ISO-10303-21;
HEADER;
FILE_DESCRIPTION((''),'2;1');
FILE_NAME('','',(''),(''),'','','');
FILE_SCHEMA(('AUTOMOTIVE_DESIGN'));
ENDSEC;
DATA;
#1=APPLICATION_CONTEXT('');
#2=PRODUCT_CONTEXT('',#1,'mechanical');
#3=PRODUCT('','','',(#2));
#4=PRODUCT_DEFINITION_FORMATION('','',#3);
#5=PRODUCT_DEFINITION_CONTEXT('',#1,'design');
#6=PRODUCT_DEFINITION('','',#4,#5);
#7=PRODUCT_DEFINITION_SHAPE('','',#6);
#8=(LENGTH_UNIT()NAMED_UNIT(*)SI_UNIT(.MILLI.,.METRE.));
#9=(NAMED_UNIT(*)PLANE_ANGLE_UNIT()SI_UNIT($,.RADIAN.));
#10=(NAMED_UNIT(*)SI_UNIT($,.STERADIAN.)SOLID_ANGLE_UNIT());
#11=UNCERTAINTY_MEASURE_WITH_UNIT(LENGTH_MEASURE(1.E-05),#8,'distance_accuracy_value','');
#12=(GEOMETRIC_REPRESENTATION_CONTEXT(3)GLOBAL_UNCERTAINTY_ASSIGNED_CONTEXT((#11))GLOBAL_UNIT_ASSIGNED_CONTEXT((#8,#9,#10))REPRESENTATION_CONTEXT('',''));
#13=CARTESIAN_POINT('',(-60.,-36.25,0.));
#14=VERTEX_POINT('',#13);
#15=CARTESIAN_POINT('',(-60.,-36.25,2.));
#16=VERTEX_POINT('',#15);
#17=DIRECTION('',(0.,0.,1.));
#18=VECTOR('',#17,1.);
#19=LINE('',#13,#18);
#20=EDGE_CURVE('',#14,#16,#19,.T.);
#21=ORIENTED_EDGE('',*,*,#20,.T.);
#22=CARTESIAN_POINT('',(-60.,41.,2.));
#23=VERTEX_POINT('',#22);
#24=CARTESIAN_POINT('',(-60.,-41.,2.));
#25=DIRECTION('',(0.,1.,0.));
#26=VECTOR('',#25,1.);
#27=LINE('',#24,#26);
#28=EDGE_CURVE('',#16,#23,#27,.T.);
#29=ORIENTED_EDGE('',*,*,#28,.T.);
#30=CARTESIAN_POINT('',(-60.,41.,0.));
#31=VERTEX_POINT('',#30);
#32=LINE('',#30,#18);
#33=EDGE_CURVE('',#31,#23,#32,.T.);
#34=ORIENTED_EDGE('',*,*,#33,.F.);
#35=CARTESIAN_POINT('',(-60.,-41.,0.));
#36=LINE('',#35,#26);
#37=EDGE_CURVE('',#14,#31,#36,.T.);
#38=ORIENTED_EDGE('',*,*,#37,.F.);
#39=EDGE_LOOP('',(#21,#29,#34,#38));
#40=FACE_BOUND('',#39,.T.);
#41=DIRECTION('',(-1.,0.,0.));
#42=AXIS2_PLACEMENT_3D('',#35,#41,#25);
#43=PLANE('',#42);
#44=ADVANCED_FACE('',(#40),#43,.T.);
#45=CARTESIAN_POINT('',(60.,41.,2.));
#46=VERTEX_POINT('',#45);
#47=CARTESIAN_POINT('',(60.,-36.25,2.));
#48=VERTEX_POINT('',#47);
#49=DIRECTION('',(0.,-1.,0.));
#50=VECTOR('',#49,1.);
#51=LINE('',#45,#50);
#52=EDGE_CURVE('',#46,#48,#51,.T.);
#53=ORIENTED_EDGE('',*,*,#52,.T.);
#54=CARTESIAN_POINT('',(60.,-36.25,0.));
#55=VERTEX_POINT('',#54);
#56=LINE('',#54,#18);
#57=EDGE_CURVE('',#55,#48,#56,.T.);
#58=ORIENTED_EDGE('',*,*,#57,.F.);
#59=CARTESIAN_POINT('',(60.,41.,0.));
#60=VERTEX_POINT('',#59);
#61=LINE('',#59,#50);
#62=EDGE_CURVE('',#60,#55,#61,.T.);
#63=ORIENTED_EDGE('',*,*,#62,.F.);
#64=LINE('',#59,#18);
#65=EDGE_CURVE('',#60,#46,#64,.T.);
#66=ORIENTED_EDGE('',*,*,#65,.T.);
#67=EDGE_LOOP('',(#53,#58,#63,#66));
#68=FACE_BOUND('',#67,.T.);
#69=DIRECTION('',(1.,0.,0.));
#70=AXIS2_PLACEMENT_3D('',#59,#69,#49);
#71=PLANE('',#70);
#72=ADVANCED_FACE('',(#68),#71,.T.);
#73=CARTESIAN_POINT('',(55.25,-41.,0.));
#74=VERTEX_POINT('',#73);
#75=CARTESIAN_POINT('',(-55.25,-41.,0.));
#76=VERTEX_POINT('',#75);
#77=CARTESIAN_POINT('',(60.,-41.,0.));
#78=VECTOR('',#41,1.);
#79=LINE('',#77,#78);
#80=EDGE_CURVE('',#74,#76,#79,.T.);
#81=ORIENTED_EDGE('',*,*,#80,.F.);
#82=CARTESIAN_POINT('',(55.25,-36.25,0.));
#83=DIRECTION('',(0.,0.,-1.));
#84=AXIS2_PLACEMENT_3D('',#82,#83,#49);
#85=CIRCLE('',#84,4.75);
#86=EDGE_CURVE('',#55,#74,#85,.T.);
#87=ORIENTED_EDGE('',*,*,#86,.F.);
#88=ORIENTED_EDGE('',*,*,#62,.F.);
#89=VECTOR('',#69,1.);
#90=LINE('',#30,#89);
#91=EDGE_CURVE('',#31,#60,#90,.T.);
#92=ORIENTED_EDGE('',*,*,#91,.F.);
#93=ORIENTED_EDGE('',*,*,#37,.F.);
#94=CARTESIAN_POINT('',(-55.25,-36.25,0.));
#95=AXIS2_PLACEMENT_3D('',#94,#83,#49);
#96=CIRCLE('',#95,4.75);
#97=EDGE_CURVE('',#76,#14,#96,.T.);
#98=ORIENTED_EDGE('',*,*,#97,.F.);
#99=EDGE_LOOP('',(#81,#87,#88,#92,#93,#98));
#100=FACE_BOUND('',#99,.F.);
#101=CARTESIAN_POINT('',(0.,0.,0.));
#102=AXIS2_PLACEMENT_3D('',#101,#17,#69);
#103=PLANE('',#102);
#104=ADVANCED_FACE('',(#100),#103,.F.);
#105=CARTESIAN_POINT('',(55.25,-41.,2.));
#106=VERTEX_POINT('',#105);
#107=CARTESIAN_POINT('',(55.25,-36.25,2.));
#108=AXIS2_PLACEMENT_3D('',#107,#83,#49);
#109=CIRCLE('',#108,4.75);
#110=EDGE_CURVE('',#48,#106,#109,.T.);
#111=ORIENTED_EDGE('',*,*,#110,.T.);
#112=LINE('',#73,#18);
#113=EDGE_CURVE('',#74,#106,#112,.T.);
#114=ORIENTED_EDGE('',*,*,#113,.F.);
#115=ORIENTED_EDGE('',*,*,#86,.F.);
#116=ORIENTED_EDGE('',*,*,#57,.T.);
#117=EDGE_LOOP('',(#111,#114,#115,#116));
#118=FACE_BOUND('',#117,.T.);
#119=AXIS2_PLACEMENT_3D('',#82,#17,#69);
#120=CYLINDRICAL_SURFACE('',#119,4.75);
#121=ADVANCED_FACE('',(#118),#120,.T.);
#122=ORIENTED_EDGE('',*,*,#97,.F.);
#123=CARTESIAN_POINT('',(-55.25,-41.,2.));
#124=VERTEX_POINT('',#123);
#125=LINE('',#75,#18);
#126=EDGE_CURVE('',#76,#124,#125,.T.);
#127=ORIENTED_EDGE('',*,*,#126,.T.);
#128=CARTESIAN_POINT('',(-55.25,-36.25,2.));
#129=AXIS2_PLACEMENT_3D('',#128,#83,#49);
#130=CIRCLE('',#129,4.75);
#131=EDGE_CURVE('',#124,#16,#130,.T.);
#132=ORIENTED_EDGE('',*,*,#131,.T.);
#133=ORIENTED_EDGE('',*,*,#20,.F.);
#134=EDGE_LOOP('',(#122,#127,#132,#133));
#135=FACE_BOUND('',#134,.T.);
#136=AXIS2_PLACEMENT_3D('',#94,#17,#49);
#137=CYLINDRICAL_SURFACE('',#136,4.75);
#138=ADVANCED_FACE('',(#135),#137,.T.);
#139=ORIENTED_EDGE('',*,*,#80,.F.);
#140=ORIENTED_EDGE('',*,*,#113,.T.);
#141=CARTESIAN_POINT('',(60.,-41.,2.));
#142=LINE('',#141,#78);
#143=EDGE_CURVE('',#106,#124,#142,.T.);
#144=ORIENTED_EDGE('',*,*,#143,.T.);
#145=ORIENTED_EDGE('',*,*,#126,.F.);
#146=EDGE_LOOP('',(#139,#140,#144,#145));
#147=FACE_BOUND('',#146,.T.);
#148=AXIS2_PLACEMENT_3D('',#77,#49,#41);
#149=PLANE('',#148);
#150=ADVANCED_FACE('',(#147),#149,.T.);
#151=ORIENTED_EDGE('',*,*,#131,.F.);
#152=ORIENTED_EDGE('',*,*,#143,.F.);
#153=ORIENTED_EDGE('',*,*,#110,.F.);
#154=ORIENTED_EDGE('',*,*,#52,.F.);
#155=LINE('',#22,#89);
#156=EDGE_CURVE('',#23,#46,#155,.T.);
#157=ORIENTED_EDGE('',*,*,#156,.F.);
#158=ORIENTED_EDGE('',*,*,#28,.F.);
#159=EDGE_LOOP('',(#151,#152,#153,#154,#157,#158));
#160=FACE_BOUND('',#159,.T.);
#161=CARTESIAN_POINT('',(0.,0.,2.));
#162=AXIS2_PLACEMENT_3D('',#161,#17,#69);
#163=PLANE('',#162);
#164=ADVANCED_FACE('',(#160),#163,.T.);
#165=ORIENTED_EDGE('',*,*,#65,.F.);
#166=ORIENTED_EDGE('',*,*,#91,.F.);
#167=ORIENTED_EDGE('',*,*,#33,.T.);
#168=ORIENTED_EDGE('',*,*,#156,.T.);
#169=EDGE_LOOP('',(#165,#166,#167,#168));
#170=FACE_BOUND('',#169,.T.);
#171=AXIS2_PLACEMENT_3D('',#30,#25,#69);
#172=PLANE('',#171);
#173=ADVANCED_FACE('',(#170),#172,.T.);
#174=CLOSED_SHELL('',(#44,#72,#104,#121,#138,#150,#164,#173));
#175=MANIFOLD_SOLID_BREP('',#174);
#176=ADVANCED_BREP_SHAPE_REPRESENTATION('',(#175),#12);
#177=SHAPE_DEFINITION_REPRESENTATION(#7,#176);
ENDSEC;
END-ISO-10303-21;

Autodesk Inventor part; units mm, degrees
ref_plane "YZ Plane" through (0, 0, 0) normal (1, 0, 0) x (0, 1, 0)
ref_plane "XZ Plane" through (0, 0, 0) normal (0, 1, 0) x (-1, 0, 0)
ref_plane "XY Plane" through (0, 0, 0) normal (0, 0, 1) x (1, 0, 0)
sketch "Sketch1" plane through (0, 0, 0) normal (0, 0, 1) x (1, 0, 0)
  line L0 (-60, 41) -> (60, 41)
  line L1 (60, 41) -> (60, -41)
  line L2 (60, -41) -> (-60, -41)
  line L3 (-60, -41) -> (-60, 41)
  line L4 (-60, 41) -> (60, -41) construction
  point P0 (0, 0)
  point P1 (0, 0)
  dimension "d0" = 120
  dimension "d1" = 82
extrude "Plate1" add sketch "Sketch1" along normal blind 2
fillet "Corner Round2" radius 4.75 2 edges at (60, -41, 1) (-60, -41, 1)
equation "\"d2\" = Thickness"
equation "\"BendReliefWidth\" = Thickness"
equation "\"BendReliefDepth\" = 0.5 * Thickness"
equation "\"CornerReliefSize\" = 4 * Thickness"
equation "\"MinimumRemnant\" = 2 * Thickness"
equation "\"TransitionRadius\" = BendRadius"
equation "\"JacobiRadiusSize\" = BendRadius"
equation "\"GapSize\" = Thickness"
equation "\"Thickness\" = 2"
equation "\"BendRadius\" = 2.75"
properties part number "MNT-CDF-602 CAP" material "Stainless Steel"
